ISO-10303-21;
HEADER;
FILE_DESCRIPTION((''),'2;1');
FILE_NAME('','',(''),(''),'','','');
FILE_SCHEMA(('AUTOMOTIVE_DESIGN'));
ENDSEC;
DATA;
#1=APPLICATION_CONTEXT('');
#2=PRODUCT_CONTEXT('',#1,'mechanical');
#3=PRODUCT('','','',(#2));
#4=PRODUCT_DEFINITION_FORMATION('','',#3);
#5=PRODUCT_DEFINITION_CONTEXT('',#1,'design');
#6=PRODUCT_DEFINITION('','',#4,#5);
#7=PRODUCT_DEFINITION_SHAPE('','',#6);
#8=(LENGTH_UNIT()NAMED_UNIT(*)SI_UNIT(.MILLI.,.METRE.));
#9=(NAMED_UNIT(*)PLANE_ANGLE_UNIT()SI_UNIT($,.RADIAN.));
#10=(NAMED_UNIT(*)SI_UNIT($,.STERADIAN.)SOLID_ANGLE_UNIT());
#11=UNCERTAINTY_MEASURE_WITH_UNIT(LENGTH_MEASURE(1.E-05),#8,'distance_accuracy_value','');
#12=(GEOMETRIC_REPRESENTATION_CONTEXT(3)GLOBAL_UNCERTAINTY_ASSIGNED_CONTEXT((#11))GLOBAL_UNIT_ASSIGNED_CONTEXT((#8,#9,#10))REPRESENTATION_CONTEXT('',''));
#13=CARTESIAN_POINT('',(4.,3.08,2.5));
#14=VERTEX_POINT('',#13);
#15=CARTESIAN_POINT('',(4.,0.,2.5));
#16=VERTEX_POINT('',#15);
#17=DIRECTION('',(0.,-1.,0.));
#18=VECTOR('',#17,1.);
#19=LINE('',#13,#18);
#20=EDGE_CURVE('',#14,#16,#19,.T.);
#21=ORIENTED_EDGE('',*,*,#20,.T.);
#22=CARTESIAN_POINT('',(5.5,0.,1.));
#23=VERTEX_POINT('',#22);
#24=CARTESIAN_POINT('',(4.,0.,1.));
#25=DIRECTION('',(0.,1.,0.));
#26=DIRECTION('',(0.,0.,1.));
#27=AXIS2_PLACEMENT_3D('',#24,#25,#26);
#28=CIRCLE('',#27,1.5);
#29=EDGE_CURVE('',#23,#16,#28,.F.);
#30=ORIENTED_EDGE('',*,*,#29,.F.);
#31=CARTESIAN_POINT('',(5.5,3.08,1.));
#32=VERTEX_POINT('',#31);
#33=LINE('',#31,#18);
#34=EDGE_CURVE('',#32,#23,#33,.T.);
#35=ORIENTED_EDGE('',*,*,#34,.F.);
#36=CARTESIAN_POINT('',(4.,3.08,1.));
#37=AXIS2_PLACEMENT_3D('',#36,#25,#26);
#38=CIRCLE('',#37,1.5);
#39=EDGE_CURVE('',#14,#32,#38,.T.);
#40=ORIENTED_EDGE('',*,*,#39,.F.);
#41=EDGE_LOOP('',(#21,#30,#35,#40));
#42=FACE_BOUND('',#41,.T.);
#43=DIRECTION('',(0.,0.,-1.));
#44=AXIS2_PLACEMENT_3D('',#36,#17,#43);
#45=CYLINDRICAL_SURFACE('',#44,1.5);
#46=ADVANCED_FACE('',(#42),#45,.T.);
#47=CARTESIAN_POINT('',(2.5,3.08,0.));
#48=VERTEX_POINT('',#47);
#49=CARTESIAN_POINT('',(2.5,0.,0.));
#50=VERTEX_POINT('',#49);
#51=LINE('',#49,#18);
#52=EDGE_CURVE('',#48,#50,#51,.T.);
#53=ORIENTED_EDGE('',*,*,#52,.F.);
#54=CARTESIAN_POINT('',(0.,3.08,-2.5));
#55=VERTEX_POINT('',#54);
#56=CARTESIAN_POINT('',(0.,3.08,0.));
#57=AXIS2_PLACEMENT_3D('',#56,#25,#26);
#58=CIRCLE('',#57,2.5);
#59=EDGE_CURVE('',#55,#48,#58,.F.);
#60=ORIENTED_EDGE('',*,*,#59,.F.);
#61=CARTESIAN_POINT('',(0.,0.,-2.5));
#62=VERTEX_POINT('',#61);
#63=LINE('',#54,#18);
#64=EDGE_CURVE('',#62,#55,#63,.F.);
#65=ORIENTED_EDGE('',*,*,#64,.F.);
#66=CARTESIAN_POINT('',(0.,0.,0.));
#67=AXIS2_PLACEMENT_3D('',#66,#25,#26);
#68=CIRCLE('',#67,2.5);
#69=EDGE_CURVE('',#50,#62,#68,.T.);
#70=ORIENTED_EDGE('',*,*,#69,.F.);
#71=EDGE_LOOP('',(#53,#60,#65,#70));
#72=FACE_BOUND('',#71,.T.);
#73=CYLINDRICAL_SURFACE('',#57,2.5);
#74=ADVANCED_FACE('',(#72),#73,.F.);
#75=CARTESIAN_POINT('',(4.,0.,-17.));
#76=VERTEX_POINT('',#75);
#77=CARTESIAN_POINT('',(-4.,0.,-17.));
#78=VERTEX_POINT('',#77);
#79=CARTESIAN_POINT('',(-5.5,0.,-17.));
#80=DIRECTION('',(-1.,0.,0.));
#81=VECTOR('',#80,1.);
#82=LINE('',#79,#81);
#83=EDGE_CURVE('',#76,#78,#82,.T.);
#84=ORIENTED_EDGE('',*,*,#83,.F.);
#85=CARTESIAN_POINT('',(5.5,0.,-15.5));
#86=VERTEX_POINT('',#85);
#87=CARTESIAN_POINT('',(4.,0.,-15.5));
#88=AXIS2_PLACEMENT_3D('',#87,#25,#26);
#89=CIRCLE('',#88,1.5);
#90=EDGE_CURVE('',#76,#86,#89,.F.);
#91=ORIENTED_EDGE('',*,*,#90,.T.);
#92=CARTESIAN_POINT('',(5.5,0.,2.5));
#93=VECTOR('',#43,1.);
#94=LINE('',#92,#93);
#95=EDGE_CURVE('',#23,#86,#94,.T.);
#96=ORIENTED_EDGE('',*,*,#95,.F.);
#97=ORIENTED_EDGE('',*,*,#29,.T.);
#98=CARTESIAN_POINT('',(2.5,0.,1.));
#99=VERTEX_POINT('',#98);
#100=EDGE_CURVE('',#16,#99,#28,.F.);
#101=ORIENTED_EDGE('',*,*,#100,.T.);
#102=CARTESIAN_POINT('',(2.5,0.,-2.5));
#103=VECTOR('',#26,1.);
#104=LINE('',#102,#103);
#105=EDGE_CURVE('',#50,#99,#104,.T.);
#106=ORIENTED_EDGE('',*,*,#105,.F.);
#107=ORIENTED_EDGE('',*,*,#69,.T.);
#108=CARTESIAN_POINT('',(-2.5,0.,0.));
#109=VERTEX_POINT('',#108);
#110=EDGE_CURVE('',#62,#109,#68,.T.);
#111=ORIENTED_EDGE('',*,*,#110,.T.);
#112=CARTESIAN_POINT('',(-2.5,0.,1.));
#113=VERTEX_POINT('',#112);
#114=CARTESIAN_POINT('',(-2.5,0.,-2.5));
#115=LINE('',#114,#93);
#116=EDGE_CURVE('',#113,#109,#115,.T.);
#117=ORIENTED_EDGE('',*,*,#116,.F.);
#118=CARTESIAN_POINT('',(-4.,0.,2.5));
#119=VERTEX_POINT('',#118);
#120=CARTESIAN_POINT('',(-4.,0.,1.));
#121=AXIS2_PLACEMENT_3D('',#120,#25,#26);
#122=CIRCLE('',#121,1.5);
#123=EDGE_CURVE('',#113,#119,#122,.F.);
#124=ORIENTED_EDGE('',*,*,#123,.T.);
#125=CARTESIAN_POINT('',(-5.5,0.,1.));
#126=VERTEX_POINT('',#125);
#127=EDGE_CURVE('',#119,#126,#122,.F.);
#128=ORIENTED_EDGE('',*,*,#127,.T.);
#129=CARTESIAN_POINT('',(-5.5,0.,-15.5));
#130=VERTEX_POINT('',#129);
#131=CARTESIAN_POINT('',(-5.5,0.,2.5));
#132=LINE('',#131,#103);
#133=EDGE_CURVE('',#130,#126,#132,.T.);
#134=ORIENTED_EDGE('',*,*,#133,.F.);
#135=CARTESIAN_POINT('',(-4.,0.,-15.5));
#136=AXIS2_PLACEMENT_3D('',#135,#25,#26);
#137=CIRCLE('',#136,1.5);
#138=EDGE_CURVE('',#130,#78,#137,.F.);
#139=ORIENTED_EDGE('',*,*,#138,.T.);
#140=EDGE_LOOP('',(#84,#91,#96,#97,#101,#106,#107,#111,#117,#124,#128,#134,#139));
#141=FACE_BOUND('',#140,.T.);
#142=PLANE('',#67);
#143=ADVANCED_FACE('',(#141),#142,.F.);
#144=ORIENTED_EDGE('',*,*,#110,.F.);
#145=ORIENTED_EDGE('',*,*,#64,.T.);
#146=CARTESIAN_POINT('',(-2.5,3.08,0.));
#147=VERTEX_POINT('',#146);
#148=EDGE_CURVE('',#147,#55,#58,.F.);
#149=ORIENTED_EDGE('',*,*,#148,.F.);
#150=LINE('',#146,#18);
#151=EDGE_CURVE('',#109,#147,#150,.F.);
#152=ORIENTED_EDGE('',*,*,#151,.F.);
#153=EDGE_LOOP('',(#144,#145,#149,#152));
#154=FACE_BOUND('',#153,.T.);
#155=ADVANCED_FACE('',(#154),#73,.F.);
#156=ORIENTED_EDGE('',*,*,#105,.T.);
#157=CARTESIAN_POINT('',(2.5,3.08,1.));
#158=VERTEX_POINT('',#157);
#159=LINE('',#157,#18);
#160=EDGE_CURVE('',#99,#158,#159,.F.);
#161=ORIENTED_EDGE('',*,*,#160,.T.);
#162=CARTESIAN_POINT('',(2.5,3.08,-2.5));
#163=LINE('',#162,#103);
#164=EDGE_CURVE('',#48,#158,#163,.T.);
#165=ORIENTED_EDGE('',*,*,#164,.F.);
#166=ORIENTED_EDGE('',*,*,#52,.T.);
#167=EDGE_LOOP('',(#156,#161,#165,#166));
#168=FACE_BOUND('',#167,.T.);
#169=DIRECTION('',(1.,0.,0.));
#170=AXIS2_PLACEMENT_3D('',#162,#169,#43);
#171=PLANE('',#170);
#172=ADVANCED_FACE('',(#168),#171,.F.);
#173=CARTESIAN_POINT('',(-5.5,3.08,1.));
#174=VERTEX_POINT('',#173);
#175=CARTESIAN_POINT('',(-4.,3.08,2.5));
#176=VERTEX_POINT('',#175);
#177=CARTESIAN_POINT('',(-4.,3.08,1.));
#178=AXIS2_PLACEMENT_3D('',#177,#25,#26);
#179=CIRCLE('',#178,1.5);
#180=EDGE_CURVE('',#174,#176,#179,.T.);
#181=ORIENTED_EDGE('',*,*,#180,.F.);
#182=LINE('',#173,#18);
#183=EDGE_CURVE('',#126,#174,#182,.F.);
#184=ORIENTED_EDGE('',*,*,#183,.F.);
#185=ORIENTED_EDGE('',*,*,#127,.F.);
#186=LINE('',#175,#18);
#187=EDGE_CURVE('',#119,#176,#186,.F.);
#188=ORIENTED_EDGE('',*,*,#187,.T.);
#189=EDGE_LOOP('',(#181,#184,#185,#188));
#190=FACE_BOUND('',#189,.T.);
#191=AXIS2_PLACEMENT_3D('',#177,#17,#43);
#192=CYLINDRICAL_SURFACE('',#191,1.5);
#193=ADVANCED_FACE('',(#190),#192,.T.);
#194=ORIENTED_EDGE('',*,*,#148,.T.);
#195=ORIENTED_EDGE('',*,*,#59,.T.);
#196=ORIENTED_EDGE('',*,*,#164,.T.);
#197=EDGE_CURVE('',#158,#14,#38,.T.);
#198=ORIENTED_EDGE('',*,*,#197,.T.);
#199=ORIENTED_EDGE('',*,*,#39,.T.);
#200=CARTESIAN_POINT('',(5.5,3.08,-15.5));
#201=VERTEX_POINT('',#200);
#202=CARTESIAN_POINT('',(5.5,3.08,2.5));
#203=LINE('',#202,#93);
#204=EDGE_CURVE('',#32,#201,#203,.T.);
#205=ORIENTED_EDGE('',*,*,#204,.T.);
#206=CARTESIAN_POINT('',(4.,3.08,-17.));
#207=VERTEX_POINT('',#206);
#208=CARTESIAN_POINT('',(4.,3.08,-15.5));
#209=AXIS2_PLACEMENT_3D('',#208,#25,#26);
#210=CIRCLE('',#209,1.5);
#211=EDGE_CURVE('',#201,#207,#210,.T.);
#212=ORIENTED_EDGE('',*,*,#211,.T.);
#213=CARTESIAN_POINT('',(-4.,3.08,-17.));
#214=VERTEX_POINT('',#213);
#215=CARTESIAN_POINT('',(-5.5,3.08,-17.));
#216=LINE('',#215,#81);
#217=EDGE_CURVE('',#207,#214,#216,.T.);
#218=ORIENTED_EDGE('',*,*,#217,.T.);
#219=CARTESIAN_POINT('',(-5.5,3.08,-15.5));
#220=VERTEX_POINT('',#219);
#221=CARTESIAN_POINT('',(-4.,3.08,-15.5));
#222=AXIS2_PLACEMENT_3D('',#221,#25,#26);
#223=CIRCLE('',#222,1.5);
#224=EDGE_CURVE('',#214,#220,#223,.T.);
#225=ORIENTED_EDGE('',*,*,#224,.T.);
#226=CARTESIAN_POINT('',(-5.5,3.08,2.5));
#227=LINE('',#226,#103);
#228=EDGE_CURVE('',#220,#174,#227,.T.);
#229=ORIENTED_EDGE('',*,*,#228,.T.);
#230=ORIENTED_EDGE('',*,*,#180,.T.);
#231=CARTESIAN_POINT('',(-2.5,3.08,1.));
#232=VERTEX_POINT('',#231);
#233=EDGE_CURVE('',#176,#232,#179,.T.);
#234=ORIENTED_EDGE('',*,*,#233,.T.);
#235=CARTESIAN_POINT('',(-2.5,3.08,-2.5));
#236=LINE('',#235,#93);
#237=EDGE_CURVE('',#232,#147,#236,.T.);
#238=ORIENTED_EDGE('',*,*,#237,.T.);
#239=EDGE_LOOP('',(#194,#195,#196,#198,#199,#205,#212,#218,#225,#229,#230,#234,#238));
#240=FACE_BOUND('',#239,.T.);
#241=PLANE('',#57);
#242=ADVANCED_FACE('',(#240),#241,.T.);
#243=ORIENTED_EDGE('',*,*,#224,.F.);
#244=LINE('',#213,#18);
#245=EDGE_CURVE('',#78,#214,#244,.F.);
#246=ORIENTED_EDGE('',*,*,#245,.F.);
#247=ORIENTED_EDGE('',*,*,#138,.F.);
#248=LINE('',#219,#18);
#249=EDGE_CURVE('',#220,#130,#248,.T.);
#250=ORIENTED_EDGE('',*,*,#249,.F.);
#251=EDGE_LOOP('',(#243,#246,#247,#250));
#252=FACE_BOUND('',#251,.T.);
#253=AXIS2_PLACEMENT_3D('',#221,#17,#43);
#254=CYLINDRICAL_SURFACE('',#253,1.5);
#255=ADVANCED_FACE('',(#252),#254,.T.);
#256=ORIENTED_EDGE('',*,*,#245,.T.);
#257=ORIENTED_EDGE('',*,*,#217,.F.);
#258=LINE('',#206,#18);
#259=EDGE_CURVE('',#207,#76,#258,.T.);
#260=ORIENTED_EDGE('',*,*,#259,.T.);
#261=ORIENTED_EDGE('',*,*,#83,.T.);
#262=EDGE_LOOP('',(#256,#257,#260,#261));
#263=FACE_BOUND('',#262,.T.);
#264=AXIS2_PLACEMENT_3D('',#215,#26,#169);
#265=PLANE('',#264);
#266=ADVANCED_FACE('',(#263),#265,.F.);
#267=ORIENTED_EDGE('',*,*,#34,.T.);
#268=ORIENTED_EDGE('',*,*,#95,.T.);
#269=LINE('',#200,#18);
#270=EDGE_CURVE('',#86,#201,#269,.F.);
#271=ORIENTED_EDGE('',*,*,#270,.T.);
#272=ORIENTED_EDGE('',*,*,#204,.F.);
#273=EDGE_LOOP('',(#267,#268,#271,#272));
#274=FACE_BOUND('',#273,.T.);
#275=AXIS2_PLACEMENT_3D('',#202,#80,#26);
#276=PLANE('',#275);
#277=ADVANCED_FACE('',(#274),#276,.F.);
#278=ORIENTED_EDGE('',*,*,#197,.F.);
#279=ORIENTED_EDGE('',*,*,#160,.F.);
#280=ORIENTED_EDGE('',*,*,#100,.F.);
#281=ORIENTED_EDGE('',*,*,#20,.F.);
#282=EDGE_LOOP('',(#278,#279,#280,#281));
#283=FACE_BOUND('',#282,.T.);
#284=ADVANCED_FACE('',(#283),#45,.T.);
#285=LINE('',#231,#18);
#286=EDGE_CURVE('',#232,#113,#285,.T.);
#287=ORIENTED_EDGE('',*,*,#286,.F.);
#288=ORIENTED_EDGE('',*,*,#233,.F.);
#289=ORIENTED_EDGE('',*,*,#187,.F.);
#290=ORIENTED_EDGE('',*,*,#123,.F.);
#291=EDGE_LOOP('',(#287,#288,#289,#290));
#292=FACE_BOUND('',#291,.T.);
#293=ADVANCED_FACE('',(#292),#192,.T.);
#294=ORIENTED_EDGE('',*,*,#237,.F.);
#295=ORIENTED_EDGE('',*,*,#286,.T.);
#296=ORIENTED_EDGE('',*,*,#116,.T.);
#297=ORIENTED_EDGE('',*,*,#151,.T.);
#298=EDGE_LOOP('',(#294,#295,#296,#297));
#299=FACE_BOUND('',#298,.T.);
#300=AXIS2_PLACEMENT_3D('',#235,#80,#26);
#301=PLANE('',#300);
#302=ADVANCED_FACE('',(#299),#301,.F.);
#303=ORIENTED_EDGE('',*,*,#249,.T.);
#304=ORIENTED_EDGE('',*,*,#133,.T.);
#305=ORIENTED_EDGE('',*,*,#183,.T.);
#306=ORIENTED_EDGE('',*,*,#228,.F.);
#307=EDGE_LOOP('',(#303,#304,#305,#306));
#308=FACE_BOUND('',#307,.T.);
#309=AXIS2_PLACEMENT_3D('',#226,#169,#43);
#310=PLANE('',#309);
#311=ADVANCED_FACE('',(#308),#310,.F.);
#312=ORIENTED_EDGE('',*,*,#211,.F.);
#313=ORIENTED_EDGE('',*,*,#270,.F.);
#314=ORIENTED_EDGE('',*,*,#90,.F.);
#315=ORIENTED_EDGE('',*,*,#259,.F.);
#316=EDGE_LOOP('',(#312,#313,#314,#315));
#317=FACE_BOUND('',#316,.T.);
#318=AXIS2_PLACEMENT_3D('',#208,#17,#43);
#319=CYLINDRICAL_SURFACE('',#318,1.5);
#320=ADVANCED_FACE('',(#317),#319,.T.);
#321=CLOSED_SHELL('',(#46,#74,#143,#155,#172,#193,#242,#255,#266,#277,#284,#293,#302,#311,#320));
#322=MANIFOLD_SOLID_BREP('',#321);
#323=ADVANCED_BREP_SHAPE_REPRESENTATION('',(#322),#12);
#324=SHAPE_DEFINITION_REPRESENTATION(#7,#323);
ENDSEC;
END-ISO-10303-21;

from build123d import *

# Parameters (mm, degrees)
BOSS_EXTRUDE1_DEPTH = 3.08
FILLET1_R           = 2.5
FILLET2_R           = 1.5


with BuildPart() as part:
    # Sketch2 → Boss-Extrude1 (new body)
    with BuildSketch(Plane(origin=(0, 0, 0), x_dir=(1, 0, 0), z_dir=(0, 1, 0))):
        Polygon((-2.5, 2.5), (-2.5, -2.5), (-5.5, -2.5), (-5.5, 17), (5.5, 17), (5.5, -2.5), (2.5, -2.5), (2.5, 2.5), align=None)
    extrude(amount=BOSS_EXTRUDE1_DEPTH)

    # Fillet1
    fillet1_edges = [part.edges().sort_by_distance(p)[0] for p in [
        (-2.5, 1.54, -2.5),
        (2.5, 1.54, -2.5),
    ]]
    fillet(fillet1_edges, radius=FILLET1_R - 0.0001)  # a hair under: the kernel refuses the full size

    # Fillet2
    fillet2_edges = [part.edges().sort_by_distance(p)[0] for p in [
        (-5.5, 1.54, -17),
        (5.5, 1.54, -17),
        (5.5, 1.54, 2.5),
        (2.5, 1.54, 2.5),
        (-5.5, 1.54, 2.5),
        (-2.5, 1.54, 2.5),
    ]]
    fillet(fillet2_edges, radius=FILLET2_R - 0.0001)  # a hair under: the kernel refuses the full size


solid = part.part
